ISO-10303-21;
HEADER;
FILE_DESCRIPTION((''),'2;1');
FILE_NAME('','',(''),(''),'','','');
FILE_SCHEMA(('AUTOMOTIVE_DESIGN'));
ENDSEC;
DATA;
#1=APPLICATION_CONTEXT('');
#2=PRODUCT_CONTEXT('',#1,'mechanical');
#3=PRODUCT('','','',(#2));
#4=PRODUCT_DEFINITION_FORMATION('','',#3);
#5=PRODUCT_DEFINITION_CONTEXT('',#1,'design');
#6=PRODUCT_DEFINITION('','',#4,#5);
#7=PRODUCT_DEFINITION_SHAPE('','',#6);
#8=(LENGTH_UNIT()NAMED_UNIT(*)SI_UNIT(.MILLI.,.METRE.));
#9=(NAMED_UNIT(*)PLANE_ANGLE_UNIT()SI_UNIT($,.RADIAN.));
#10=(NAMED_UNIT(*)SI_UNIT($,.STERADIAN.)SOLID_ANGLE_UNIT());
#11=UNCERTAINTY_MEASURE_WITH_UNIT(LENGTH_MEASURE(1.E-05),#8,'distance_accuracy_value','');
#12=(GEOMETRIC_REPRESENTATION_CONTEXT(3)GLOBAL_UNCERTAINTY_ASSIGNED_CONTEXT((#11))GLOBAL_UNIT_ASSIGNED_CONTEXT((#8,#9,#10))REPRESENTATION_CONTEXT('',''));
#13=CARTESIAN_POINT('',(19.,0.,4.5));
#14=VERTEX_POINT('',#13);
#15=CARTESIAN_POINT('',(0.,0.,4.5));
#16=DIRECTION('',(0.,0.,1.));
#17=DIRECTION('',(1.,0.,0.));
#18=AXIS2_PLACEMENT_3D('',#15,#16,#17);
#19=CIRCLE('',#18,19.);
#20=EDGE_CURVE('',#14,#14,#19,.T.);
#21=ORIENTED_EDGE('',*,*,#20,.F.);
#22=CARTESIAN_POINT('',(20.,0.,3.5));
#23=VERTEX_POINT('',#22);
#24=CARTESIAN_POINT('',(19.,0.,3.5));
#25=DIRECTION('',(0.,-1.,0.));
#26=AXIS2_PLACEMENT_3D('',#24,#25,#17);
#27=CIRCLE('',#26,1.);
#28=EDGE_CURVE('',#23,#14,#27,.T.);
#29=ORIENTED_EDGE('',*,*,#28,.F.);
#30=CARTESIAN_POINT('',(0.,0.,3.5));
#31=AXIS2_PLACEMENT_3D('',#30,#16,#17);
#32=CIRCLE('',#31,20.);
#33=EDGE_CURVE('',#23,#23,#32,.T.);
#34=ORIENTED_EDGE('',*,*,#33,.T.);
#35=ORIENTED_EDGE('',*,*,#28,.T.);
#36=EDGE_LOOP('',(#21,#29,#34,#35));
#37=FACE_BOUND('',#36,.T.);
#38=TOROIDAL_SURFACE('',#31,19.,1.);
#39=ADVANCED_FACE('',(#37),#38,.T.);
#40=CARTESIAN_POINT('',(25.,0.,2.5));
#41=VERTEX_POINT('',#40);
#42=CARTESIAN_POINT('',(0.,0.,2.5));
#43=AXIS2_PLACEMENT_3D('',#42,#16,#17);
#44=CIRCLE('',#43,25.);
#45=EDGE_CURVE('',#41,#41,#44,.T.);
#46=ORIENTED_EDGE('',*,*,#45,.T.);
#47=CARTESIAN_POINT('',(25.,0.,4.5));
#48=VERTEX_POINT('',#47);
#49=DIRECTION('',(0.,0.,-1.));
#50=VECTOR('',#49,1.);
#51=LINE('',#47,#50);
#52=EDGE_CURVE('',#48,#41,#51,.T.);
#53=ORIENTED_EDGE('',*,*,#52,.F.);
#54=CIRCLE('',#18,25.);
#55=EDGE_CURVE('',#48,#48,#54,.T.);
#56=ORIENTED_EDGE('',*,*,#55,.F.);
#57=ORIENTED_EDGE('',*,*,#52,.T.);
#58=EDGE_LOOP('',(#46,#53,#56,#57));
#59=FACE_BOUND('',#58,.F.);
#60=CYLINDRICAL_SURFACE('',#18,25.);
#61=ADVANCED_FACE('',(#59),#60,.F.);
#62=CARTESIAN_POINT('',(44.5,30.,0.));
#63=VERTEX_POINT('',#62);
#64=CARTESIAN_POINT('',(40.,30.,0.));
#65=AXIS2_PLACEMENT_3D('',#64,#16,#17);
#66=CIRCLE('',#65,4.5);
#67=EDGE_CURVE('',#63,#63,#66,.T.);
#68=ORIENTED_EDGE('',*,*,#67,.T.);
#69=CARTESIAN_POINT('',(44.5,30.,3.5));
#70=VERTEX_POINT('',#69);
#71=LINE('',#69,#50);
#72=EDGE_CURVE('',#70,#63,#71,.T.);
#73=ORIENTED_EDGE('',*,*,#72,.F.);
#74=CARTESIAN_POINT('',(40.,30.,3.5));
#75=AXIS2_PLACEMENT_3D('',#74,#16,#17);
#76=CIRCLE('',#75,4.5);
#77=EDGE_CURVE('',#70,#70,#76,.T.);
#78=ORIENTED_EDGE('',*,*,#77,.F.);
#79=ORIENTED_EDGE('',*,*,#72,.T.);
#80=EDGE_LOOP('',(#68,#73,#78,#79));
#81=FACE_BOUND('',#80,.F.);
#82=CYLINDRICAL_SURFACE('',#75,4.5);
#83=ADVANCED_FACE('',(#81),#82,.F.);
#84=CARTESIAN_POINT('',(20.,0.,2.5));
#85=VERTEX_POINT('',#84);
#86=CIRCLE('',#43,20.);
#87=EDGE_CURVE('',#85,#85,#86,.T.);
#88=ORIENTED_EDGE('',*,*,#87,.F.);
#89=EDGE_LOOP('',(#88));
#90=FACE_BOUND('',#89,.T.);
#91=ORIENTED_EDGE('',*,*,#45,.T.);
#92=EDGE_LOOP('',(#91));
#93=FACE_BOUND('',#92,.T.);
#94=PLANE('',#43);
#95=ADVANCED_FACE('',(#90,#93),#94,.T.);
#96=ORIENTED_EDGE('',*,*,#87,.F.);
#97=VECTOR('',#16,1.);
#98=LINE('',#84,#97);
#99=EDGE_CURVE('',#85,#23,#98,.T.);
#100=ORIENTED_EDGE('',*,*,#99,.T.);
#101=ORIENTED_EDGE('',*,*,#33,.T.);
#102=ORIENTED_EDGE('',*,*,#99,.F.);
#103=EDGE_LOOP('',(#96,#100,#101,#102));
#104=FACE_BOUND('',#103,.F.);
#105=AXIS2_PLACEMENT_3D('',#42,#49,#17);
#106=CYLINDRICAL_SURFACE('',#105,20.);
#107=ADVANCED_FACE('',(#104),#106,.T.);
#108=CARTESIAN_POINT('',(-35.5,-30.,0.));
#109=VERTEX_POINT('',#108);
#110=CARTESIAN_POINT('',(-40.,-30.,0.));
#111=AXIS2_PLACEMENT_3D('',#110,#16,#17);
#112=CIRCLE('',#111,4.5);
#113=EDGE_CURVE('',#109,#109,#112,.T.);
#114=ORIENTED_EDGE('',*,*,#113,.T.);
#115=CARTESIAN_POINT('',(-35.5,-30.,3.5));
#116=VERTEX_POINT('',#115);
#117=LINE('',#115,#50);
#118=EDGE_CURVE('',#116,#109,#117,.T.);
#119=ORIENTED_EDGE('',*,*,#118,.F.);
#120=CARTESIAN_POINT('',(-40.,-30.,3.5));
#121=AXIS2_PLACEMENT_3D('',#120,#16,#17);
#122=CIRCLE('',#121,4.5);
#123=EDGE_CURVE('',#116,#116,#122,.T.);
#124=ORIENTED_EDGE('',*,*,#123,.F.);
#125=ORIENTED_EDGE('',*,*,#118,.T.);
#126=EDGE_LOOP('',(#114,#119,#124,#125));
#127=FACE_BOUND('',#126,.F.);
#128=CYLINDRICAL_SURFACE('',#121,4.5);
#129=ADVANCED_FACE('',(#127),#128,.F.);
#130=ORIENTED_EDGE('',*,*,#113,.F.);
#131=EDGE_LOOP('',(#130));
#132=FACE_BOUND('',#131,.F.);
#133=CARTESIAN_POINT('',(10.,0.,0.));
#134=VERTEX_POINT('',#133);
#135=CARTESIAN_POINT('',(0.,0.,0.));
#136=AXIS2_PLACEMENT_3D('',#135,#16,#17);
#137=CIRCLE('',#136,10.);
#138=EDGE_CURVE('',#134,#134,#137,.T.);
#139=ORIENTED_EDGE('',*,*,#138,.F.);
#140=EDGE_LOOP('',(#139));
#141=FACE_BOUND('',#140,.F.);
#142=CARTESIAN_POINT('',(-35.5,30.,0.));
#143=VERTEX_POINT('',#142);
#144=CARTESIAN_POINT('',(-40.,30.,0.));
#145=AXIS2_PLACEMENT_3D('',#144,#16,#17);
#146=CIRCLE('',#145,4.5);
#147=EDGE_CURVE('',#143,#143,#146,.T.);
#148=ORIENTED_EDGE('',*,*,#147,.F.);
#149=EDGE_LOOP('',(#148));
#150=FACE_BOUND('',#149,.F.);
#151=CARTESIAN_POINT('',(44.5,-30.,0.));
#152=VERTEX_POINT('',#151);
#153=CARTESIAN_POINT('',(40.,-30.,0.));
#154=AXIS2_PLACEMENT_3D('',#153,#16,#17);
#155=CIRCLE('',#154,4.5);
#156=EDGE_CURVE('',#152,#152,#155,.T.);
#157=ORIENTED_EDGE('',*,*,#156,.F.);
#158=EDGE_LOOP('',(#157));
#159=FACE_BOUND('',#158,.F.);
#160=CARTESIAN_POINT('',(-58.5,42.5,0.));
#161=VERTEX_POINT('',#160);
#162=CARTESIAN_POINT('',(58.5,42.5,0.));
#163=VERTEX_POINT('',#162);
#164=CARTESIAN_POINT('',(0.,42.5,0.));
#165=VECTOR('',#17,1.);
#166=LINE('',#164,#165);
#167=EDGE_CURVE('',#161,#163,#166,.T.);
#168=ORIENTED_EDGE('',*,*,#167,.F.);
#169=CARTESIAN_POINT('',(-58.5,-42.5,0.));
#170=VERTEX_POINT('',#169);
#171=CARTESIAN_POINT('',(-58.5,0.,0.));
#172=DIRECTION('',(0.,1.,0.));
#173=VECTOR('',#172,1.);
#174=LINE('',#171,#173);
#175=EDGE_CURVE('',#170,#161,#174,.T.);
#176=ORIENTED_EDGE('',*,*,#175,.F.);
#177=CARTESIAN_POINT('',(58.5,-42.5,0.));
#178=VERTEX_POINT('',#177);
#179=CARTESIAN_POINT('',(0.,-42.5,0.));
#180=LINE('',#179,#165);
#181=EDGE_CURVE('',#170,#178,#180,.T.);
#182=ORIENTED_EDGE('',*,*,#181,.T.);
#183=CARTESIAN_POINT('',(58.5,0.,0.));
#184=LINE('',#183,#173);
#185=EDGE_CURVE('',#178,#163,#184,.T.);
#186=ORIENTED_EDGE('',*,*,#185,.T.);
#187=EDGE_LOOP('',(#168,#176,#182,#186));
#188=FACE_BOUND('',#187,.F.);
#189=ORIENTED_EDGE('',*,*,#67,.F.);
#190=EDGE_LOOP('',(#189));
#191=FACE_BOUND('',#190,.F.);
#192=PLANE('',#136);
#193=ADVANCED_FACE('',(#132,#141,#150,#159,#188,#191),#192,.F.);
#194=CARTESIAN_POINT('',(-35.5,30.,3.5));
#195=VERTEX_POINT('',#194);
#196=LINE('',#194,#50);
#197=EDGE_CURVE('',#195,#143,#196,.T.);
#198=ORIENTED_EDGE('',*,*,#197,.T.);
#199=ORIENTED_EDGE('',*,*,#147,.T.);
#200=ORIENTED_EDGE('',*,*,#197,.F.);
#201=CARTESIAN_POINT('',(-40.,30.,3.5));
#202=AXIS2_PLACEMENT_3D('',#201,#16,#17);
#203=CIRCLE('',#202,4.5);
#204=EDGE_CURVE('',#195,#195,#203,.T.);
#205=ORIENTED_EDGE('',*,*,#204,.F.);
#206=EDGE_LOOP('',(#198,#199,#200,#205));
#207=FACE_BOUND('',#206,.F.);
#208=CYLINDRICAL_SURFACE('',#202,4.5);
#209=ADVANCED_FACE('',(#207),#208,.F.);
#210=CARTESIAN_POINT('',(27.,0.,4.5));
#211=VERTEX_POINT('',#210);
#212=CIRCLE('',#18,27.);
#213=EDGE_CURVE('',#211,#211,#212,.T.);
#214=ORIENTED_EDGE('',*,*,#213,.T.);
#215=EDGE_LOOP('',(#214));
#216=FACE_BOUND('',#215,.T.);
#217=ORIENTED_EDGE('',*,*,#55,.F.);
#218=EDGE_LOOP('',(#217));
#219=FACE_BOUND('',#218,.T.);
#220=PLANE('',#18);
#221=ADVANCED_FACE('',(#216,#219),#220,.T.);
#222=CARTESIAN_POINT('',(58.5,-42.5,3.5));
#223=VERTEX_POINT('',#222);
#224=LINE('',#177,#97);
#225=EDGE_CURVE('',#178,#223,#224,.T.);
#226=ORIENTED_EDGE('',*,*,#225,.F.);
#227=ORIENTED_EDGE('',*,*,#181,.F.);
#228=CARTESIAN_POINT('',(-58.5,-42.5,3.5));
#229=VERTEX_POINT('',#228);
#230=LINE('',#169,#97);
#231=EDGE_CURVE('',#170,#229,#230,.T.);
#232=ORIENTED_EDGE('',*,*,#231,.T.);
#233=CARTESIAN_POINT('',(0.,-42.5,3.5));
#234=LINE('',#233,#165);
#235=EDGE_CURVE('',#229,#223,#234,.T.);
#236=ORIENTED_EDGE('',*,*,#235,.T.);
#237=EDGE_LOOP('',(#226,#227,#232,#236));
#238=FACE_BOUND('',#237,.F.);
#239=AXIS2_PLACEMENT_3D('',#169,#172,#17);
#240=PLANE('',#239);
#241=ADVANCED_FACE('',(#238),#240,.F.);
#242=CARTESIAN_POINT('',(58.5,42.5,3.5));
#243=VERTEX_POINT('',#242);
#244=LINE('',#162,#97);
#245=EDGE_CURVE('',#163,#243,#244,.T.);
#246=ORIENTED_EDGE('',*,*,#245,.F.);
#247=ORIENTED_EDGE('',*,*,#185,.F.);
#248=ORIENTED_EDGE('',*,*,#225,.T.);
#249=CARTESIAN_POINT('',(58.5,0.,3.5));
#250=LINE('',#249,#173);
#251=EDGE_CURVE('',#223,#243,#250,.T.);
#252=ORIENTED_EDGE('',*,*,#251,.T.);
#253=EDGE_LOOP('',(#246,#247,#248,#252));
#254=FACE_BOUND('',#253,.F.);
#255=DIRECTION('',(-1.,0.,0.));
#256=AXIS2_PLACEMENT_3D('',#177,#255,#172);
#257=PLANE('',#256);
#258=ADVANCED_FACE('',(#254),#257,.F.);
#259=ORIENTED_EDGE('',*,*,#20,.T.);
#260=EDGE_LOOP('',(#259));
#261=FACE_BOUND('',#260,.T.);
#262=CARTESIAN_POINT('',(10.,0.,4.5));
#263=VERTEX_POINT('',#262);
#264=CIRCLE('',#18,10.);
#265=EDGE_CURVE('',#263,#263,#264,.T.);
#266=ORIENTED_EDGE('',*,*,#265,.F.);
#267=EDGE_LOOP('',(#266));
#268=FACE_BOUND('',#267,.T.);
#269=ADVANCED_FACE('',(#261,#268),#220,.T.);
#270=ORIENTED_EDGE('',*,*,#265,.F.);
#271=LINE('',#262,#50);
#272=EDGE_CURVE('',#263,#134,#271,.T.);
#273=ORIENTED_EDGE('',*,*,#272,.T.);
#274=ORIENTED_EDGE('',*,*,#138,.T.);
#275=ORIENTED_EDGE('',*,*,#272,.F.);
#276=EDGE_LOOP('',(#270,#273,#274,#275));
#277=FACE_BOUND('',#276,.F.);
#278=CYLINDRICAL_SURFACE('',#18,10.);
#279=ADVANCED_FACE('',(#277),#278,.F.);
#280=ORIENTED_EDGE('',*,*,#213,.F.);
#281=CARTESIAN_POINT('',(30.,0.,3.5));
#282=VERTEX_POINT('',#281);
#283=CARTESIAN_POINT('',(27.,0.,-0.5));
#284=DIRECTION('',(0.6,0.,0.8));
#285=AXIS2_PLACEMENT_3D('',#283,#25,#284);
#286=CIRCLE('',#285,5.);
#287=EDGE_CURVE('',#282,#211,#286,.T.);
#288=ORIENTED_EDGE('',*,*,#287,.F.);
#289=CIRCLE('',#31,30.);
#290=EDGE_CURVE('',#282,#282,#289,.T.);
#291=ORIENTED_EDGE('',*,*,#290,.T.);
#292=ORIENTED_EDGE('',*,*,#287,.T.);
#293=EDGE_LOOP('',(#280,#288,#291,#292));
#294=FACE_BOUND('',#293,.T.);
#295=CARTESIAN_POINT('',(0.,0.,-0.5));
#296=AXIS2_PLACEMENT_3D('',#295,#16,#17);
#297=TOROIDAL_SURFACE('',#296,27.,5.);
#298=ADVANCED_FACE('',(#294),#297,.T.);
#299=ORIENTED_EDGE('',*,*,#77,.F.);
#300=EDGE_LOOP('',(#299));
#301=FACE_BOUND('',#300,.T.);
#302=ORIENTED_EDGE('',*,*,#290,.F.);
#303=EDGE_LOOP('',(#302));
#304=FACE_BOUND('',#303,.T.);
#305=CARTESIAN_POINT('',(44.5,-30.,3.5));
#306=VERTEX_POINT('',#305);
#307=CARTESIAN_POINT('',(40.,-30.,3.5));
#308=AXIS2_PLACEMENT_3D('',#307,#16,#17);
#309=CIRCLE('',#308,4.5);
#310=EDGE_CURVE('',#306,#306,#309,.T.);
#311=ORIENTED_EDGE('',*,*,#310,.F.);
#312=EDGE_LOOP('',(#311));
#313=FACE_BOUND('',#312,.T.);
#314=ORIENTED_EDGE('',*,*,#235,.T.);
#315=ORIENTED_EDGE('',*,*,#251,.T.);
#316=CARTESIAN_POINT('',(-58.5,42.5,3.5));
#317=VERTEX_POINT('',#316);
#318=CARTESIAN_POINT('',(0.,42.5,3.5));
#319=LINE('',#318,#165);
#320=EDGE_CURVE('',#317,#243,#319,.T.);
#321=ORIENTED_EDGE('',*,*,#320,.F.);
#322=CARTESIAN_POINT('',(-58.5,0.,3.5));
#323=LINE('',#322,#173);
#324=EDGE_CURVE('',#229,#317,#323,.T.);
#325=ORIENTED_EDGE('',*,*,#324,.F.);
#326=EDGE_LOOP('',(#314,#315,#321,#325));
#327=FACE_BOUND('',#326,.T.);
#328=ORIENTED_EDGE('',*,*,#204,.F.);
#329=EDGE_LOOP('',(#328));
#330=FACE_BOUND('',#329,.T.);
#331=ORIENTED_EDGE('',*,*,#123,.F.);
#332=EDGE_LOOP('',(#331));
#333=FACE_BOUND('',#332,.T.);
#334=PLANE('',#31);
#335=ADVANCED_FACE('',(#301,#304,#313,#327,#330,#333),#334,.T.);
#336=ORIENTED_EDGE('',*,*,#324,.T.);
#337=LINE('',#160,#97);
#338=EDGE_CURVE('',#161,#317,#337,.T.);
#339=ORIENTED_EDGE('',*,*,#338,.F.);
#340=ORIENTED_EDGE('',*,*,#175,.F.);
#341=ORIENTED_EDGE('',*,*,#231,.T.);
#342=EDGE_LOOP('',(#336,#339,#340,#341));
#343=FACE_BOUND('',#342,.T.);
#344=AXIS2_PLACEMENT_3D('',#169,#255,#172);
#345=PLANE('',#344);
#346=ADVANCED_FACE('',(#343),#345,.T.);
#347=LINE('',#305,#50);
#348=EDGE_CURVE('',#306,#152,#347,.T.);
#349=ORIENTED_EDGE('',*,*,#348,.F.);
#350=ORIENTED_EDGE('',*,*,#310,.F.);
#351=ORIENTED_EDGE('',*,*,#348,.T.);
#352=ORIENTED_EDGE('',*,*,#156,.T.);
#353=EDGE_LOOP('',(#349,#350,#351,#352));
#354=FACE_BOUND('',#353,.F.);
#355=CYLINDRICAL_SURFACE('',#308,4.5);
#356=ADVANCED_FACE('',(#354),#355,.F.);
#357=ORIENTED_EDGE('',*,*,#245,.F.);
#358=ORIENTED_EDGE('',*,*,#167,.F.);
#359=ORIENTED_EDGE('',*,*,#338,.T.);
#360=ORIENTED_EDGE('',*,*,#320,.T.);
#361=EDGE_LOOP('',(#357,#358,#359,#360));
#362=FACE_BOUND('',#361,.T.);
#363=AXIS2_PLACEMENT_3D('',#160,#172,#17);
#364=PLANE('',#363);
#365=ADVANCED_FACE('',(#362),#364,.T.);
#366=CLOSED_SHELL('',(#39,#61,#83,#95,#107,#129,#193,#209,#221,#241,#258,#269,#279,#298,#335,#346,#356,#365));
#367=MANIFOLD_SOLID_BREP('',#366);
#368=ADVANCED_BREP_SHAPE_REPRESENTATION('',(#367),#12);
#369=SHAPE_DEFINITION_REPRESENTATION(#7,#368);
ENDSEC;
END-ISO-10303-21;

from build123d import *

# Parameters (mm, degrees)
F0_W      = 117
F0_H      = 85
F1_DEPTH  = 3.5
F2_R      = 4.5
F3_DEPTH  = 25
F4_R      = 30
F5_DEPTH  = 1
F7_R      = 25
F8_DEPTH  = 2
F9_R      = 20
F10_DEPTH = 2
F11_R     = 1
F12_R     = 10
F13_DEPTH = 25


# Not quite as in the source:
# - a fillet or chamfer that OpenCascade refuses, or shapes differently, is made with other operations: its cross-section is extruded or revolved along the edge and cut away or added


with BuildPart() as f1:
    # F0 (on Top) → F1 (new body)
    with BuildSketch(Plane.XY):
        Rectangle(F0_W, F0_H)
    extrude(amount=F1_DEPTH)

    # F2 (on face) → F3 (cut)
    with BuildSketch(Plane.XY.offset(3.5)):
        with Locations((40, 30)):
            Circle(F2_R)
        with Locations((-40, 30)):
            Circle(F2_R)
        with Locations((-40, -30)):
            Circle(F2_R)
        with Locations((40, -30)):
            Circle(F2_R)
    extrude(amount=-F3_DEPTH, mode=Mode.SUBTRACT)

    # F4 (on face) → F5 (join)
    with BuildSketch(Plane.XY.offset(3.5)):
        Circle(F4_R)
    extrude(amount=F5_DEPTH)

    # F6: fillet of radius 5 on 1 edges, made by hand

    # F6_s1 → F6_t2 (revolve, cut)
    with BuildSketch(Plane.XZ):
        with BuildLine():
            ThreePointArc((30, 3.5), (28.5811388301, 4.2434164903), (27, 4.5))
            Line((27, 4.5), (30, 4.5))
            Line((30, 4.5), (30, 3.5))
        make_face()
    revolve(axis=Axis((0, 0, 4.5), (0, 0, 1)), mode=Mode.SUBTRACT)

    # F7 (on face) → F8 (cut)
    with BuildSketch(Plane.XY.offset(4.5)):
        Circle(F7_R)
    extrude(amount=-F8_DEPTH, mode=Mode.SUBTRACT)

    # F9 (on face) → F10 (join)
    with BuildSketch(Plane.XY.offset(2.5)):
        Circle(F9_R)
    extrude(amount=F10_DEPTH)

    # F11
    f11_edges = [f1.edges().sort_by_distance(p)[0] for p in [
        (-20, 0, 4.5),
    ]]
    fillet(f11_edges, radius=F11_R)

    # F12 (on face) → F13 (cut)
    with BuildSketch(Plane.XY.offset(4.5)):
        Circle(F12_R)
    extrude(amount=-F13_DEPTH, mode=Mode.SUBTRACT)


solid = f1.part
